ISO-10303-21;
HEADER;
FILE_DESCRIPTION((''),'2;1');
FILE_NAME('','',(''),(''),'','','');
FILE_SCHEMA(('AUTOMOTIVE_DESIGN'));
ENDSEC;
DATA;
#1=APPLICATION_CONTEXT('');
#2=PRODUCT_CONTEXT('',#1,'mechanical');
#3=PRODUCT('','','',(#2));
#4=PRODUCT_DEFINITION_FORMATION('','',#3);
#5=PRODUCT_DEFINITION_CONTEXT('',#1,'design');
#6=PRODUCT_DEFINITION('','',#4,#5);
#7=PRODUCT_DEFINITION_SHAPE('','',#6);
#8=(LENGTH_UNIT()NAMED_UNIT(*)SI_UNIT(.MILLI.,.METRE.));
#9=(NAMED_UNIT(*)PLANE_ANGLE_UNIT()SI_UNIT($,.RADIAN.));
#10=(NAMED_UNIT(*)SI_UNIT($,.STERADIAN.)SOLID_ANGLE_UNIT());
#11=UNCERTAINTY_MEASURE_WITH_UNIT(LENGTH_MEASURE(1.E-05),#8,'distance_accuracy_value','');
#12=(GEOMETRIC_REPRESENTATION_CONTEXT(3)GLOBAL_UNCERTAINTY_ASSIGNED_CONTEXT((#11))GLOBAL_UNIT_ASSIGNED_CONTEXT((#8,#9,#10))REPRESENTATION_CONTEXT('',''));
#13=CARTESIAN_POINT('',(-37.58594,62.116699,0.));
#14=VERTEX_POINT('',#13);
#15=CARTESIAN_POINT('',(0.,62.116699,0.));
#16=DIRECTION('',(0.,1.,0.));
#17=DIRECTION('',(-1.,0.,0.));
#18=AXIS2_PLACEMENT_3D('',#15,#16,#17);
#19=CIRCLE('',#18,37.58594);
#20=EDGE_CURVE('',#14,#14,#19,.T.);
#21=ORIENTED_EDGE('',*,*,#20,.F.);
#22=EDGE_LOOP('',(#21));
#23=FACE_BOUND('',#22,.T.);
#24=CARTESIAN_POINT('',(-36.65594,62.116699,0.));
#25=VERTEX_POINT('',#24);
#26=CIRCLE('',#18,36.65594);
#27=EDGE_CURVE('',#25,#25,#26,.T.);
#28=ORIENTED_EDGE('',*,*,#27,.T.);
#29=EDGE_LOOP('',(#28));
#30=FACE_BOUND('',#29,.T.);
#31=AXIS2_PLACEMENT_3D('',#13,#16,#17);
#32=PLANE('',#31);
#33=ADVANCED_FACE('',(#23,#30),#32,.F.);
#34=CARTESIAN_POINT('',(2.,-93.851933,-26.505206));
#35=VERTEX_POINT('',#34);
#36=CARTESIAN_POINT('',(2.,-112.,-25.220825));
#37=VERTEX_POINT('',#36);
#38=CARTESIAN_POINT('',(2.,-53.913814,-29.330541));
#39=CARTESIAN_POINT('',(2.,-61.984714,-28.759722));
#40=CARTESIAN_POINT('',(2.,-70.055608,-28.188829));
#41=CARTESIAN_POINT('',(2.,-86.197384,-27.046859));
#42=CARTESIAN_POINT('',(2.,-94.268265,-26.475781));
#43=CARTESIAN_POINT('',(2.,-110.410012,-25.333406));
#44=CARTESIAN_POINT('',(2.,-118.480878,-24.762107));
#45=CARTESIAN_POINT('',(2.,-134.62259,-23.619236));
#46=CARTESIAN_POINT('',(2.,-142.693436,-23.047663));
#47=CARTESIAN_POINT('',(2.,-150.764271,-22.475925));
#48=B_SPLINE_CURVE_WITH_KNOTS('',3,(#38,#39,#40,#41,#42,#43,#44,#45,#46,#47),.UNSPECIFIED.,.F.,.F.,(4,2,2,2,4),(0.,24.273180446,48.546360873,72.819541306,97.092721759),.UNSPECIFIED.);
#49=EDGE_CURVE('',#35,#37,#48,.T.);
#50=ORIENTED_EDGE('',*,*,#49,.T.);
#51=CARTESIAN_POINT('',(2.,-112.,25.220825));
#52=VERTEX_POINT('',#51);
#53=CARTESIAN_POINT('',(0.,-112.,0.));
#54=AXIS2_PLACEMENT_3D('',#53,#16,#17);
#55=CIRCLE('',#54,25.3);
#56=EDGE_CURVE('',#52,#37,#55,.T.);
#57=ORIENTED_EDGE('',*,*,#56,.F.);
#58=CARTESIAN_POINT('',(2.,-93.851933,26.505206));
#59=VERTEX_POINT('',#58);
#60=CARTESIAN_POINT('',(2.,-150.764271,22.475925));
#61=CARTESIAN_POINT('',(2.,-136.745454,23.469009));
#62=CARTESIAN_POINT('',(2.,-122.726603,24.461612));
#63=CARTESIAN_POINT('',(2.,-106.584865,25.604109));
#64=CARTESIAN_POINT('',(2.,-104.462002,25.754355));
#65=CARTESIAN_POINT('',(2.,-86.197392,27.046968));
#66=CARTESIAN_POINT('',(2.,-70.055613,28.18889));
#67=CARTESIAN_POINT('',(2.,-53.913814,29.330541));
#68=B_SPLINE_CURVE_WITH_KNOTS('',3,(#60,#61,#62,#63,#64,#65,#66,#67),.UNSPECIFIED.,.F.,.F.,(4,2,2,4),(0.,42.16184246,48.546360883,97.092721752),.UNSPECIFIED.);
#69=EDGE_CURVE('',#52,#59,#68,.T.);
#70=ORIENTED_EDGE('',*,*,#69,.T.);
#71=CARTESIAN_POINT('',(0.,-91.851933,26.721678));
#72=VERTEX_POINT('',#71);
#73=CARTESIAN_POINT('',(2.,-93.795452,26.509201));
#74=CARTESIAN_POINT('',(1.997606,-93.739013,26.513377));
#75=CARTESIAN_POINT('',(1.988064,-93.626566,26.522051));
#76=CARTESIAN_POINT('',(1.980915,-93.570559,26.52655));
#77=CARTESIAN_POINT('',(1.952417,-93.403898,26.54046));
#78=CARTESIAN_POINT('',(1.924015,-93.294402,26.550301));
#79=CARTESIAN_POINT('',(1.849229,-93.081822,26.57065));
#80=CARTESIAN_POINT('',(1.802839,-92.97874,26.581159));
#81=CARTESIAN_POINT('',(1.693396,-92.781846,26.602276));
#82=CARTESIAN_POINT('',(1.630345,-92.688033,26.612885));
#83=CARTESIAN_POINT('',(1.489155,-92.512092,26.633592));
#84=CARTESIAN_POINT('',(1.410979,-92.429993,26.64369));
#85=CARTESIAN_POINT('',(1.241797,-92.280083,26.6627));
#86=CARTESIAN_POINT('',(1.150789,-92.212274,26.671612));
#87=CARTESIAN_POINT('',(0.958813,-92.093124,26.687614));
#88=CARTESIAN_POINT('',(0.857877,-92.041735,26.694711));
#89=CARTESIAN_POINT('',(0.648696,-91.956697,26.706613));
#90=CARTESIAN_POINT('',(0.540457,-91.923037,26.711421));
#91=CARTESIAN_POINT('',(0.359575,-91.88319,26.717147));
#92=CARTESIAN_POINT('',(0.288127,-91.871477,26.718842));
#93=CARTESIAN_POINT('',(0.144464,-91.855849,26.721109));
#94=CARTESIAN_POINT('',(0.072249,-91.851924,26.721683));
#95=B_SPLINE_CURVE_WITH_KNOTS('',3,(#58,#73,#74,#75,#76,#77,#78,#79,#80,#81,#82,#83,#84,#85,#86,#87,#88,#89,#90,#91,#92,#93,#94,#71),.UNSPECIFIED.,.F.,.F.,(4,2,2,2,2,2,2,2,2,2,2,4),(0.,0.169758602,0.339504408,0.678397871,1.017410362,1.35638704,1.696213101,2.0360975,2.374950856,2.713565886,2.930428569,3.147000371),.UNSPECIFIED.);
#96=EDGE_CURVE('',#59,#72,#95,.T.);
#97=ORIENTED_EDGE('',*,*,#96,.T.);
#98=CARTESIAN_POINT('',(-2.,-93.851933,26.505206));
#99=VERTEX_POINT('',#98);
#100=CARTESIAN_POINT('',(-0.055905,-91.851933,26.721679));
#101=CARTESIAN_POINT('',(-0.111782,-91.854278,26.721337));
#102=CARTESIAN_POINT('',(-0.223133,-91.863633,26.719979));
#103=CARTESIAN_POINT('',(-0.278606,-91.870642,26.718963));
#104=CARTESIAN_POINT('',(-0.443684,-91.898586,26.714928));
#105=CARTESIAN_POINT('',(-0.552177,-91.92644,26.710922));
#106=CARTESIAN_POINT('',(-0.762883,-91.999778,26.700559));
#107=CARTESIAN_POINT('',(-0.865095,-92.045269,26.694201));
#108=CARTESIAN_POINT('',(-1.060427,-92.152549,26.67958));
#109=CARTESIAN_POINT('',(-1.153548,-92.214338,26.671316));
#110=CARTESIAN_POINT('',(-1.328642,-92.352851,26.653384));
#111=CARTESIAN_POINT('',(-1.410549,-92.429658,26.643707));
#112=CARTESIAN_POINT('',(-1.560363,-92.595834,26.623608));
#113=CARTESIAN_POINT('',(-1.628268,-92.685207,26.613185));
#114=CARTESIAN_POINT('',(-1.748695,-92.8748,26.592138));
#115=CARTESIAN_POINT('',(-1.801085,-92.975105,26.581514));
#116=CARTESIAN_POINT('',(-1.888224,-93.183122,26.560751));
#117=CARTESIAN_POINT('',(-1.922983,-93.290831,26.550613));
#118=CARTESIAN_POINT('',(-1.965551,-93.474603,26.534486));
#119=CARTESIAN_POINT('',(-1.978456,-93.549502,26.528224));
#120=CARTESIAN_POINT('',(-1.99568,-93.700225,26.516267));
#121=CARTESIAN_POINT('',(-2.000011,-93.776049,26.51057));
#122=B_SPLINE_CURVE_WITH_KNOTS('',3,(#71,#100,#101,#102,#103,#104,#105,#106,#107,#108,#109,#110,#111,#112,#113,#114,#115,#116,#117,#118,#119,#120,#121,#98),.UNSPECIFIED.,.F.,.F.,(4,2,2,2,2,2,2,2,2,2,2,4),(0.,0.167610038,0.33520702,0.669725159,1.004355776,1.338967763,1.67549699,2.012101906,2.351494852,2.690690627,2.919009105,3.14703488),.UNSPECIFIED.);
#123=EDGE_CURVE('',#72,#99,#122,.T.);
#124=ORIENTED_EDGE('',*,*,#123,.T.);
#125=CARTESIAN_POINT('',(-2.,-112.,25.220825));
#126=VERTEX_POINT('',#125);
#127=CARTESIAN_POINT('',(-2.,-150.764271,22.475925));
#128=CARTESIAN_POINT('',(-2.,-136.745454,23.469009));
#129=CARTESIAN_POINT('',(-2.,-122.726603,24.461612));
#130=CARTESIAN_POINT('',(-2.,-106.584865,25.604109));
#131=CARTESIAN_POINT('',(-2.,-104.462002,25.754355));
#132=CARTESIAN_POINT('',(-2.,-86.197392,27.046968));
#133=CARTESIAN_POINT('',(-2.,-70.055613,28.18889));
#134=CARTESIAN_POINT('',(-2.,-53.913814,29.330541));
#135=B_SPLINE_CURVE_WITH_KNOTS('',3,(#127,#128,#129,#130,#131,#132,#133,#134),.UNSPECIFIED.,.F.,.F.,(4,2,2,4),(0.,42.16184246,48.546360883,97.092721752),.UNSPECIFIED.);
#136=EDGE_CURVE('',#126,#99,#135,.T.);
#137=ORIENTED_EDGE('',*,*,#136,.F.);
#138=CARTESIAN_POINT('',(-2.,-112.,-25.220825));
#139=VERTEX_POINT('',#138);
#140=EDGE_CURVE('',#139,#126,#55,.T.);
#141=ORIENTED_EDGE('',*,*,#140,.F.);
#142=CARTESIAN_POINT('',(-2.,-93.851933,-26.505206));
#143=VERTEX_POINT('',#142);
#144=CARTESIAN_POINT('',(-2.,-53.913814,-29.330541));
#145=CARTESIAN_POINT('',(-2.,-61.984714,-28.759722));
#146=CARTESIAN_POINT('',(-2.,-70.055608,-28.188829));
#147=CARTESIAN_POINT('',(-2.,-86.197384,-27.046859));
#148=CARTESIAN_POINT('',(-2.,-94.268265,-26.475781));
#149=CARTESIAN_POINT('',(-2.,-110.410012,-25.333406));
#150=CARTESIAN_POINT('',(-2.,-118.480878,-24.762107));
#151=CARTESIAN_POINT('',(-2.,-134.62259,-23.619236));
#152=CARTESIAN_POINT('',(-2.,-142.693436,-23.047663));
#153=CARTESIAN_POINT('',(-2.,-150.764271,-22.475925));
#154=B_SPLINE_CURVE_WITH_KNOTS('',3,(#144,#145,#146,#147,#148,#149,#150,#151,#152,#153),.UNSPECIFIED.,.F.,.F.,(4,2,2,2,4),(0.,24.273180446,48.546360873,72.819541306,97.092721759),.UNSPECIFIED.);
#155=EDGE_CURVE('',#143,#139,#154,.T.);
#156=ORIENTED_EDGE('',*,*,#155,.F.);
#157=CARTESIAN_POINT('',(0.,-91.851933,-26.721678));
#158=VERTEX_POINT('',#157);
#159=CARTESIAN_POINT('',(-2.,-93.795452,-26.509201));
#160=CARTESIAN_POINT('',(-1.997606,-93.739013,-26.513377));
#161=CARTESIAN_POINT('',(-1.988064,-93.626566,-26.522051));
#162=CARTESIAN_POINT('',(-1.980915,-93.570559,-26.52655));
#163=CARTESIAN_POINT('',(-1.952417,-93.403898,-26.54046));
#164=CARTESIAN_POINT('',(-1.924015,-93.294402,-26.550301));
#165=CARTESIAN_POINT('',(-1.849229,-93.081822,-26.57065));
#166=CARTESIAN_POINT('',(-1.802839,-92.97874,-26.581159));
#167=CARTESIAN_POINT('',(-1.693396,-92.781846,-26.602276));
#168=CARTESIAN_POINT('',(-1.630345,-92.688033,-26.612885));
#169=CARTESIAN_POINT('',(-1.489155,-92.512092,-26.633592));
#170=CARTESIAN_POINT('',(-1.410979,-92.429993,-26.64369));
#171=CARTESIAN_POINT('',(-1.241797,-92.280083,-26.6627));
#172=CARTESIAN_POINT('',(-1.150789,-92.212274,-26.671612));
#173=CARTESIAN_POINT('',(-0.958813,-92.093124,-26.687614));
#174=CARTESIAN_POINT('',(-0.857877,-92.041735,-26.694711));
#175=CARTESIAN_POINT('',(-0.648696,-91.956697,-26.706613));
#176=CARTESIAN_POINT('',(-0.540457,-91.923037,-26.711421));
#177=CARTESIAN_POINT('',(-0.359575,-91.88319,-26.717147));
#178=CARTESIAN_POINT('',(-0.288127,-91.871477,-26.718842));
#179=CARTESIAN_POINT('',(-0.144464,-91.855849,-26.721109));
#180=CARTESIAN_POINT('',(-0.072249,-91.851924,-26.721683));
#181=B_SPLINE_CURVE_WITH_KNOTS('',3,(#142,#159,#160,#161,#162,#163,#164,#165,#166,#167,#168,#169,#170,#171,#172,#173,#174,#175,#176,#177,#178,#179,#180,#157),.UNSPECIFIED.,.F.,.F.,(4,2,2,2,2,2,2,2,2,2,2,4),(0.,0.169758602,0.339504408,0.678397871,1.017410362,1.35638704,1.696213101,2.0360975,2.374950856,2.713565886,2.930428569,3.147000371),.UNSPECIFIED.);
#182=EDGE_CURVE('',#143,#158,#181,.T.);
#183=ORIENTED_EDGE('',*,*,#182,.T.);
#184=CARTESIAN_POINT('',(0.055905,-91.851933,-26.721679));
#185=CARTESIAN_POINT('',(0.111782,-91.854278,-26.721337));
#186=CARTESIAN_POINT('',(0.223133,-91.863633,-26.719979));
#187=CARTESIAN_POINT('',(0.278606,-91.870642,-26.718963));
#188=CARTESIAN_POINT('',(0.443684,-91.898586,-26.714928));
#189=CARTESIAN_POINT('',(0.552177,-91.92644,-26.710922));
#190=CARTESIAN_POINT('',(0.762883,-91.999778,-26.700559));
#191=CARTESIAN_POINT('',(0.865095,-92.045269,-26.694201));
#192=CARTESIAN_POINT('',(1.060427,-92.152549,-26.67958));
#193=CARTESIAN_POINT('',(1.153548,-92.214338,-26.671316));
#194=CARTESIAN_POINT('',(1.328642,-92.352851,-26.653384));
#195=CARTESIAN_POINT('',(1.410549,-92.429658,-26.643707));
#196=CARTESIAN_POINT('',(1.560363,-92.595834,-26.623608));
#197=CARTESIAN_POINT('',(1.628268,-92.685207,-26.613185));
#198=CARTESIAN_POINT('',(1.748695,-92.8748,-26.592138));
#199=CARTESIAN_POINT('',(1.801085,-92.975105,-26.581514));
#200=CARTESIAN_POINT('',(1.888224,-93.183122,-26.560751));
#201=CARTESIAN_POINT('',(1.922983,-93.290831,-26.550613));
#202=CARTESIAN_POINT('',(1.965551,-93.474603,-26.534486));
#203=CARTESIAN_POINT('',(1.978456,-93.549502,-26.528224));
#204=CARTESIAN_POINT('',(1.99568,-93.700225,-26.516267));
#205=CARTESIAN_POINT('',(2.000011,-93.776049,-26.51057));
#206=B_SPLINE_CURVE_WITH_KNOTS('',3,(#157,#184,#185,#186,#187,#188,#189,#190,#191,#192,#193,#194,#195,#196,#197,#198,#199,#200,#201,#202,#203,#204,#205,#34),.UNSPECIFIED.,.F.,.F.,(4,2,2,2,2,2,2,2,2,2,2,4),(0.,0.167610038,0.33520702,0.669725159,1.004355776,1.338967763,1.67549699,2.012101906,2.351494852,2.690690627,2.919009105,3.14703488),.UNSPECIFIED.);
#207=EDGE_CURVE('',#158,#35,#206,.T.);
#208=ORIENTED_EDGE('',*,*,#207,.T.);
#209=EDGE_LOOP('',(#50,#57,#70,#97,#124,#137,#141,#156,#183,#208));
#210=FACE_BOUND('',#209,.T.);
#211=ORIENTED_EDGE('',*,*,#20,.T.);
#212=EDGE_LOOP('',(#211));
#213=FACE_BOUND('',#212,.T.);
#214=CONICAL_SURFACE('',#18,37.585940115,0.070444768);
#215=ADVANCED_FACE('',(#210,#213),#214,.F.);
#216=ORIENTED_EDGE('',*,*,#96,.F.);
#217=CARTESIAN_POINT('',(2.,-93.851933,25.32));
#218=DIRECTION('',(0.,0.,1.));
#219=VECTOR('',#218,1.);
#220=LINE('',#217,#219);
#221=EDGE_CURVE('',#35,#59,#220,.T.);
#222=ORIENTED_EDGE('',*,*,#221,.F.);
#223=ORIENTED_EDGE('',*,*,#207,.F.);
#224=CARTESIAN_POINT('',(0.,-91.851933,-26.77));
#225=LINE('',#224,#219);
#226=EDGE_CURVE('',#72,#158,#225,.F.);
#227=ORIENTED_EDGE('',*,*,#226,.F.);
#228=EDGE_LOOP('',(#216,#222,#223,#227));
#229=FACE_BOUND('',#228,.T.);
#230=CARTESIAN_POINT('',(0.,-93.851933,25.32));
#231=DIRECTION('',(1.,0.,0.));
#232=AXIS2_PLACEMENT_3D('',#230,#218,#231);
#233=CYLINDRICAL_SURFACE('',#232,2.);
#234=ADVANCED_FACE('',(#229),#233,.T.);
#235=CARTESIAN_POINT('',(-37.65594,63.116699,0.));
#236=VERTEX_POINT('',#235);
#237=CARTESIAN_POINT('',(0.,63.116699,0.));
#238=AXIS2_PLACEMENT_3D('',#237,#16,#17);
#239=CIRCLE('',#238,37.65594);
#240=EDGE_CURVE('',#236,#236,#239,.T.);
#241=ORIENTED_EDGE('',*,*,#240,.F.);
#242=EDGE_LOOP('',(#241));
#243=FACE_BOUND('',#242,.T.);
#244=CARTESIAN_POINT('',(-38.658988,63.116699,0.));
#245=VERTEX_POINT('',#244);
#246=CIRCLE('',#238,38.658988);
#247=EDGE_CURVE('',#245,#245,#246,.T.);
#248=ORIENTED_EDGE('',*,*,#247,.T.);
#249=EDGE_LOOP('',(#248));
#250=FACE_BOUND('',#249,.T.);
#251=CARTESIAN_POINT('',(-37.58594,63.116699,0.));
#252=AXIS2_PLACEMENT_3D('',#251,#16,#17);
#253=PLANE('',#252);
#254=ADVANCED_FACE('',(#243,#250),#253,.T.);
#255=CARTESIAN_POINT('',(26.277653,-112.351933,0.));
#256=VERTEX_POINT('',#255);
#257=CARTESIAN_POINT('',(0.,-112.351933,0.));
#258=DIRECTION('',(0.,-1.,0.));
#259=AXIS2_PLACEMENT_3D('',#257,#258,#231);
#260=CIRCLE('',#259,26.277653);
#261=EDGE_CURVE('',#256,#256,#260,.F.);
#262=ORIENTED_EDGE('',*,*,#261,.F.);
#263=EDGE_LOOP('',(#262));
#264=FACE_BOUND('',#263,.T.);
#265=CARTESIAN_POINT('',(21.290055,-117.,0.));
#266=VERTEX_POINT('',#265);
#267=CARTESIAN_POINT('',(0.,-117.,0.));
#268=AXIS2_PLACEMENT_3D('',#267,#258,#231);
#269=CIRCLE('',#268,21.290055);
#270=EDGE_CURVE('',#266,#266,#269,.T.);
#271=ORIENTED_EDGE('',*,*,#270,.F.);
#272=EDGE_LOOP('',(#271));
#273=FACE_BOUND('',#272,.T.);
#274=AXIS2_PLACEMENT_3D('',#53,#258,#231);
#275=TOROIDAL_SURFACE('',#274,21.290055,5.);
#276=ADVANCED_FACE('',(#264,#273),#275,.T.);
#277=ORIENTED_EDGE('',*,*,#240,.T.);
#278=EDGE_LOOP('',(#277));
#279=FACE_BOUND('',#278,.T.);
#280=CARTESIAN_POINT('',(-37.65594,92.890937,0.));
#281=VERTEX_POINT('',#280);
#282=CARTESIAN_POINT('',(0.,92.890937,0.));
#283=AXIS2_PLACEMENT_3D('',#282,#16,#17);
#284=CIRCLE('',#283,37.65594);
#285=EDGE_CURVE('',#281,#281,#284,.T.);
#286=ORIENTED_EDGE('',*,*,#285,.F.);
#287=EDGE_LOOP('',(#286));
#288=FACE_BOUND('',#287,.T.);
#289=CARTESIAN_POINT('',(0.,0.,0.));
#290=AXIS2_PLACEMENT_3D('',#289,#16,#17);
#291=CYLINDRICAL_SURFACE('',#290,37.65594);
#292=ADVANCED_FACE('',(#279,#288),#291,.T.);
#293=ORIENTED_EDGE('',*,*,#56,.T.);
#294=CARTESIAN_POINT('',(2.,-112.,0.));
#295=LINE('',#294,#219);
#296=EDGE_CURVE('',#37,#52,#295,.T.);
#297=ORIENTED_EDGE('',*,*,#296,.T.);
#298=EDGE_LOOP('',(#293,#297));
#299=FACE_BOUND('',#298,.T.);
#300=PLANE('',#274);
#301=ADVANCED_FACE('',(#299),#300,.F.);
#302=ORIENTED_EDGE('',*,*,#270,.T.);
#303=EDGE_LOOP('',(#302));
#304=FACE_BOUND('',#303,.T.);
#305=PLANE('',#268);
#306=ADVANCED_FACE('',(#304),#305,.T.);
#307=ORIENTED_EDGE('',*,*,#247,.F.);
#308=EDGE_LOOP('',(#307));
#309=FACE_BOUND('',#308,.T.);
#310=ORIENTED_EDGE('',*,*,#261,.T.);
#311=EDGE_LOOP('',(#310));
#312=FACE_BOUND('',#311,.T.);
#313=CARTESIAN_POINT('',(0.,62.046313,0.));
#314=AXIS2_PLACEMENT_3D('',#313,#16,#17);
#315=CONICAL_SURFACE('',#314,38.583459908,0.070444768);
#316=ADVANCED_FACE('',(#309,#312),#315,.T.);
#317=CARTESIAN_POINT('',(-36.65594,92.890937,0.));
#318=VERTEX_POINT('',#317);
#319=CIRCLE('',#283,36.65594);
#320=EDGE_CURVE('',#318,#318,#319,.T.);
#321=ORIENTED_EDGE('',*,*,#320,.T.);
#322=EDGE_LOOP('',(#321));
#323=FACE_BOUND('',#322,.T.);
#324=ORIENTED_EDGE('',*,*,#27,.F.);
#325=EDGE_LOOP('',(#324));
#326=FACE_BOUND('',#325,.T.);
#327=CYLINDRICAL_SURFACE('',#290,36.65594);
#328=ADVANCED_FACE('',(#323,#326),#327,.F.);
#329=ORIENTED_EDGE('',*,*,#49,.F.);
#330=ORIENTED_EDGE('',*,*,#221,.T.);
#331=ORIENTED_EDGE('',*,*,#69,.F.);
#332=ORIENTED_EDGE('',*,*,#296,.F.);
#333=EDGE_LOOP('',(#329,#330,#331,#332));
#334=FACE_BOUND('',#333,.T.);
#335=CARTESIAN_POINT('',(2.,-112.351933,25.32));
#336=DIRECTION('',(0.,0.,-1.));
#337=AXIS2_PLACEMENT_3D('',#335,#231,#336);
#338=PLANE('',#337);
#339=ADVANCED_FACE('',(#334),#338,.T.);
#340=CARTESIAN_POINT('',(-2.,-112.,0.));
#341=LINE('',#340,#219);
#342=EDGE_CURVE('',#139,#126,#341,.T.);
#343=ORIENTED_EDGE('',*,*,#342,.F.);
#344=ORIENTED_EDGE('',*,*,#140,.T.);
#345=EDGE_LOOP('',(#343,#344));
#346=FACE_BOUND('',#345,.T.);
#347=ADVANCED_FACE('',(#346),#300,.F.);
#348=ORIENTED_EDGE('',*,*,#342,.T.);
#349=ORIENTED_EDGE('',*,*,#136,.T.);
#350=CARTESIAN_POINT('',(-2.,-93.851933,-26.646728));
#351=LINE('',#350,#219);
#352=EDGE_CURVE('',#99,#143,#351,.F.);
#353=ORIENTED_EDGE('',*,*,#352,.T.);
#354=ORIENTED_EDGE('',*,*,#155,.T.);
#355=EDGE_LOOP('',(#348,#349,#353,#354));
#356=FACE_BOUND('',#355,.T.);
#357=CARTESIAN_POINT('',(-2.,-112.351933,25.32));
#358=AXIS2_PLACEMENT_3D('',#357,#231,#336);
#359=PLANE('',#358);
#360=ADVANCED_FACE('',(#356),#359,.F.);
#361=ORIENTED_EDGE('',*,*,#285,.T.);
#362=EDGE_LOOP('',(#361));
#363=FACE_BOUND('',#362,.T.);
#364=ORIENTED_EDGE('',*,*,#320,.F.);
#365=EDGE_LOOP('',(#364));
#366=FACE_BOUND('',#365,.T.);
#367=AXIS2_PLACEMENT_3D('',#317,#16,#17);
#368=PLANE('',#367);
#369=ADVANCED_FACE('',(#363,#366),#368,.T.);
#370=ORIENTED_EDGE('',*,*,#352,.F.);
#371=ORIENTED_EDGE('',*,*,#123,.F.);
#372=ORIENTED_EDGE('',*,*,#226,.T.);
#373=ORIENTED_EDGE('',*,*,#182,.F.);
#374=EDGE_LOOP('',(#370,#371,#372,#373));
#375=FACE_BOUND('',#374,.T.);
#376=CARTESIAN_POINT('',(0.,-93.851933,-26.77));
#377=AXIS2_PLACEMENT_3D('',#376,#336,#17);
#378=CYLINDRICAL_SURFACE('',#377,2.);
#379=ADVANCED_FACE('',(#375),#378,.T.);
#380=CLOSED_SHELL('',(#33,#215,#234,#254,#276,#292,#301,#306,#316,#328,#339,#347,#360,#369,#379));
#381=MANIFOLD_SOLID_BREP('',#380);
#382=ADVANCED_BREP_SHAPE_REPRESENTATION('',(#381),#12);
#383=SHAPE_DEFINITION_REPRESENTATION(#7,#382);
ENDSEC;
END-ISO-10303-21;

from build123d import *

# Parameters (mm, degrees)
BODY_START                   = 62.116699477
BODY_SHELL_OUTLINE_R         = 36.655940115
BODY_SHELL_DEPTH             = 30.774237315
BODY_SHELL_2_OUTLINE_R       = 37.655940115
BODY_SHELL_2_OUTLINE_R_2     = 36.655940115
BODY_SHELL_2_DEPTH           = 30.774237315
BASE_FILLET_R                = 5
PARTITION_EXTRUDE_DEPTH      = 2
PARTITION_EXTRUDE_DEPTH_BACK = 2
PARTITION_FILLET_1_R         = 2
PARTITION_FILLET_2_R         = 2


with BuildPart() as part:
    # Body Sketch → Body revolve (revolve)
    with BuildSketch(Plane.XY):
        Polygon((0, 0), (0, -112), (-25.3, -112), (-37.585940115, 62.116699477), (-36.655940115, 62.116699477), (-36.655940115, 92.890936792), (0, 92.890936792), align=None)
    revolve(axis=Axis((0, 0, 0), (0, -1, 0)))

    # Body Shell: read off the stored shape, not the designer's step
    # Body Shell outline → Body Shell (cut)
    with BuildSketch(Plane(origin=(0, 0, 0), x_dir=(1, 0, 0), z_dir=(0, 1, 0)).offset(BODY_START)):
        Circle(BODY_SHELL_OUTLINE_R)
    extrude(amount=BODY_SHELL_DEPTH, mode=Mode.SUBTRACT)

    # Body Shell 2 outline → Body Shell 2 (add)
    with BuildSketch(Plane(origin=(0, 0, 0), x_dir=(1, 0, 0), z_dir=(0, 1, 0)).offset(BODY_START)):
        Circle(BODY_SHELL_2_OUTLINE_R)
        Circle(BODY_SHELL_2_OUTLINE_R_2, mode=Mode.SUBTRACT)
    extrude(amount=BODY_SHELL_2_DEPTH)

    # Body Shell 3 outline → Body Shell 3 (revolve, cut)
    with BuildSketch(Plane.XY):
        Polygon((0, 62.116699477), (0, -117), (25.949678741, -117), (36.655940115, 34.729446569), (36.655940115, 62.116699477), align=None)
    revolve(axis=Axis((0, 0, 0), (0, 1, 0)), mode=Mode.SUBTRACT)

    # Body Shell 4 outline → Body Shell 4 (revolve)
    with BuildSketch(Plane.XY):
        Polygon((36.655940115, 62.116699477), (36.655940115, 34.729446569), (38.658988015, 63.116699477), (37.655940115, 63.116699477), (37.655940115, 62.116699477), align=None)
    revolve(axis=Axis((0, 0, 0), (0, 1, 0)))

    # Body Shell 5 outline → Body Shell 5 (revolve, cut)
    with BuildSketch(Plane.XY):
        Polygon((36.655940115, 62.116699477), (36.655940115, 48.936712516), (37.585940115, 62.116699477), align=None)
    revolve(axis=Axis((0, 0, 0), (0, 1, 0)), mode=Mode.SUBTRACT)

    # Body Shell 6 outline → Body Shell 6 (revolve)
    with BuildSketch(Plane.XY):
        Polygon((0, -112), (0, -117), (25.949678741, -117), (36.655940115, 34.729446569), (36.655940115, 48.936712516), (25.3, -112), align=None)
    revolve(axis=Axis((0, 0, 0), (0, 1, 0)))

    # Base Fillet
    base_fillet_edges = [part.edges().sort_by_distance(p)[0] for p in [
        (-25.949678741, -117, 0),
    ]]
    fillet(base_fillet_edges, radius=BASE_FILLET_R)

    # Partition Sketch → Partition Extrude (add, two sides: drawn at the far end of the back side and taken through both)
    with BuildSketch(Plane(origin=(0, 0, 0), x_dir=(0, 0, -1), z_dir=(1, 0, 0)).offset(-PARTITION_EXTRUDE_DEPTH_BACK)):
        Polygon((-25.32, -112.351932597), (25.32, -112.351932597), (26.77, -91.851932597), (-26.77, -91.851932597), align=None)
    extrude(amount=PARTITION_EXTRUDE_DEPTH + PARTITION_EXTRUDE_DEPTH_BACK)

    # Partition Fillet 1
    partition_fillet_1_edges = [part.edges().sort_by_distance(p)[0] for p in [
        (2, -91.851932597, 0),
    ]]
    fillet(partition_fillet_1_edges, radius=PARTITION_FILLET_1_R)

    # Partition Fillet 2
    partition_fillet_2_edges = [part.edges().sort_by_distance(p)[0] for p in [
        (-2, -91.851932597, 0),
    ]]
    fillet(partition_fillet_2_edges, radius=PARTITION_FILLET_2_R - 0.0001)  # a hair under: the kernel refuses the full size


solid = part.part
